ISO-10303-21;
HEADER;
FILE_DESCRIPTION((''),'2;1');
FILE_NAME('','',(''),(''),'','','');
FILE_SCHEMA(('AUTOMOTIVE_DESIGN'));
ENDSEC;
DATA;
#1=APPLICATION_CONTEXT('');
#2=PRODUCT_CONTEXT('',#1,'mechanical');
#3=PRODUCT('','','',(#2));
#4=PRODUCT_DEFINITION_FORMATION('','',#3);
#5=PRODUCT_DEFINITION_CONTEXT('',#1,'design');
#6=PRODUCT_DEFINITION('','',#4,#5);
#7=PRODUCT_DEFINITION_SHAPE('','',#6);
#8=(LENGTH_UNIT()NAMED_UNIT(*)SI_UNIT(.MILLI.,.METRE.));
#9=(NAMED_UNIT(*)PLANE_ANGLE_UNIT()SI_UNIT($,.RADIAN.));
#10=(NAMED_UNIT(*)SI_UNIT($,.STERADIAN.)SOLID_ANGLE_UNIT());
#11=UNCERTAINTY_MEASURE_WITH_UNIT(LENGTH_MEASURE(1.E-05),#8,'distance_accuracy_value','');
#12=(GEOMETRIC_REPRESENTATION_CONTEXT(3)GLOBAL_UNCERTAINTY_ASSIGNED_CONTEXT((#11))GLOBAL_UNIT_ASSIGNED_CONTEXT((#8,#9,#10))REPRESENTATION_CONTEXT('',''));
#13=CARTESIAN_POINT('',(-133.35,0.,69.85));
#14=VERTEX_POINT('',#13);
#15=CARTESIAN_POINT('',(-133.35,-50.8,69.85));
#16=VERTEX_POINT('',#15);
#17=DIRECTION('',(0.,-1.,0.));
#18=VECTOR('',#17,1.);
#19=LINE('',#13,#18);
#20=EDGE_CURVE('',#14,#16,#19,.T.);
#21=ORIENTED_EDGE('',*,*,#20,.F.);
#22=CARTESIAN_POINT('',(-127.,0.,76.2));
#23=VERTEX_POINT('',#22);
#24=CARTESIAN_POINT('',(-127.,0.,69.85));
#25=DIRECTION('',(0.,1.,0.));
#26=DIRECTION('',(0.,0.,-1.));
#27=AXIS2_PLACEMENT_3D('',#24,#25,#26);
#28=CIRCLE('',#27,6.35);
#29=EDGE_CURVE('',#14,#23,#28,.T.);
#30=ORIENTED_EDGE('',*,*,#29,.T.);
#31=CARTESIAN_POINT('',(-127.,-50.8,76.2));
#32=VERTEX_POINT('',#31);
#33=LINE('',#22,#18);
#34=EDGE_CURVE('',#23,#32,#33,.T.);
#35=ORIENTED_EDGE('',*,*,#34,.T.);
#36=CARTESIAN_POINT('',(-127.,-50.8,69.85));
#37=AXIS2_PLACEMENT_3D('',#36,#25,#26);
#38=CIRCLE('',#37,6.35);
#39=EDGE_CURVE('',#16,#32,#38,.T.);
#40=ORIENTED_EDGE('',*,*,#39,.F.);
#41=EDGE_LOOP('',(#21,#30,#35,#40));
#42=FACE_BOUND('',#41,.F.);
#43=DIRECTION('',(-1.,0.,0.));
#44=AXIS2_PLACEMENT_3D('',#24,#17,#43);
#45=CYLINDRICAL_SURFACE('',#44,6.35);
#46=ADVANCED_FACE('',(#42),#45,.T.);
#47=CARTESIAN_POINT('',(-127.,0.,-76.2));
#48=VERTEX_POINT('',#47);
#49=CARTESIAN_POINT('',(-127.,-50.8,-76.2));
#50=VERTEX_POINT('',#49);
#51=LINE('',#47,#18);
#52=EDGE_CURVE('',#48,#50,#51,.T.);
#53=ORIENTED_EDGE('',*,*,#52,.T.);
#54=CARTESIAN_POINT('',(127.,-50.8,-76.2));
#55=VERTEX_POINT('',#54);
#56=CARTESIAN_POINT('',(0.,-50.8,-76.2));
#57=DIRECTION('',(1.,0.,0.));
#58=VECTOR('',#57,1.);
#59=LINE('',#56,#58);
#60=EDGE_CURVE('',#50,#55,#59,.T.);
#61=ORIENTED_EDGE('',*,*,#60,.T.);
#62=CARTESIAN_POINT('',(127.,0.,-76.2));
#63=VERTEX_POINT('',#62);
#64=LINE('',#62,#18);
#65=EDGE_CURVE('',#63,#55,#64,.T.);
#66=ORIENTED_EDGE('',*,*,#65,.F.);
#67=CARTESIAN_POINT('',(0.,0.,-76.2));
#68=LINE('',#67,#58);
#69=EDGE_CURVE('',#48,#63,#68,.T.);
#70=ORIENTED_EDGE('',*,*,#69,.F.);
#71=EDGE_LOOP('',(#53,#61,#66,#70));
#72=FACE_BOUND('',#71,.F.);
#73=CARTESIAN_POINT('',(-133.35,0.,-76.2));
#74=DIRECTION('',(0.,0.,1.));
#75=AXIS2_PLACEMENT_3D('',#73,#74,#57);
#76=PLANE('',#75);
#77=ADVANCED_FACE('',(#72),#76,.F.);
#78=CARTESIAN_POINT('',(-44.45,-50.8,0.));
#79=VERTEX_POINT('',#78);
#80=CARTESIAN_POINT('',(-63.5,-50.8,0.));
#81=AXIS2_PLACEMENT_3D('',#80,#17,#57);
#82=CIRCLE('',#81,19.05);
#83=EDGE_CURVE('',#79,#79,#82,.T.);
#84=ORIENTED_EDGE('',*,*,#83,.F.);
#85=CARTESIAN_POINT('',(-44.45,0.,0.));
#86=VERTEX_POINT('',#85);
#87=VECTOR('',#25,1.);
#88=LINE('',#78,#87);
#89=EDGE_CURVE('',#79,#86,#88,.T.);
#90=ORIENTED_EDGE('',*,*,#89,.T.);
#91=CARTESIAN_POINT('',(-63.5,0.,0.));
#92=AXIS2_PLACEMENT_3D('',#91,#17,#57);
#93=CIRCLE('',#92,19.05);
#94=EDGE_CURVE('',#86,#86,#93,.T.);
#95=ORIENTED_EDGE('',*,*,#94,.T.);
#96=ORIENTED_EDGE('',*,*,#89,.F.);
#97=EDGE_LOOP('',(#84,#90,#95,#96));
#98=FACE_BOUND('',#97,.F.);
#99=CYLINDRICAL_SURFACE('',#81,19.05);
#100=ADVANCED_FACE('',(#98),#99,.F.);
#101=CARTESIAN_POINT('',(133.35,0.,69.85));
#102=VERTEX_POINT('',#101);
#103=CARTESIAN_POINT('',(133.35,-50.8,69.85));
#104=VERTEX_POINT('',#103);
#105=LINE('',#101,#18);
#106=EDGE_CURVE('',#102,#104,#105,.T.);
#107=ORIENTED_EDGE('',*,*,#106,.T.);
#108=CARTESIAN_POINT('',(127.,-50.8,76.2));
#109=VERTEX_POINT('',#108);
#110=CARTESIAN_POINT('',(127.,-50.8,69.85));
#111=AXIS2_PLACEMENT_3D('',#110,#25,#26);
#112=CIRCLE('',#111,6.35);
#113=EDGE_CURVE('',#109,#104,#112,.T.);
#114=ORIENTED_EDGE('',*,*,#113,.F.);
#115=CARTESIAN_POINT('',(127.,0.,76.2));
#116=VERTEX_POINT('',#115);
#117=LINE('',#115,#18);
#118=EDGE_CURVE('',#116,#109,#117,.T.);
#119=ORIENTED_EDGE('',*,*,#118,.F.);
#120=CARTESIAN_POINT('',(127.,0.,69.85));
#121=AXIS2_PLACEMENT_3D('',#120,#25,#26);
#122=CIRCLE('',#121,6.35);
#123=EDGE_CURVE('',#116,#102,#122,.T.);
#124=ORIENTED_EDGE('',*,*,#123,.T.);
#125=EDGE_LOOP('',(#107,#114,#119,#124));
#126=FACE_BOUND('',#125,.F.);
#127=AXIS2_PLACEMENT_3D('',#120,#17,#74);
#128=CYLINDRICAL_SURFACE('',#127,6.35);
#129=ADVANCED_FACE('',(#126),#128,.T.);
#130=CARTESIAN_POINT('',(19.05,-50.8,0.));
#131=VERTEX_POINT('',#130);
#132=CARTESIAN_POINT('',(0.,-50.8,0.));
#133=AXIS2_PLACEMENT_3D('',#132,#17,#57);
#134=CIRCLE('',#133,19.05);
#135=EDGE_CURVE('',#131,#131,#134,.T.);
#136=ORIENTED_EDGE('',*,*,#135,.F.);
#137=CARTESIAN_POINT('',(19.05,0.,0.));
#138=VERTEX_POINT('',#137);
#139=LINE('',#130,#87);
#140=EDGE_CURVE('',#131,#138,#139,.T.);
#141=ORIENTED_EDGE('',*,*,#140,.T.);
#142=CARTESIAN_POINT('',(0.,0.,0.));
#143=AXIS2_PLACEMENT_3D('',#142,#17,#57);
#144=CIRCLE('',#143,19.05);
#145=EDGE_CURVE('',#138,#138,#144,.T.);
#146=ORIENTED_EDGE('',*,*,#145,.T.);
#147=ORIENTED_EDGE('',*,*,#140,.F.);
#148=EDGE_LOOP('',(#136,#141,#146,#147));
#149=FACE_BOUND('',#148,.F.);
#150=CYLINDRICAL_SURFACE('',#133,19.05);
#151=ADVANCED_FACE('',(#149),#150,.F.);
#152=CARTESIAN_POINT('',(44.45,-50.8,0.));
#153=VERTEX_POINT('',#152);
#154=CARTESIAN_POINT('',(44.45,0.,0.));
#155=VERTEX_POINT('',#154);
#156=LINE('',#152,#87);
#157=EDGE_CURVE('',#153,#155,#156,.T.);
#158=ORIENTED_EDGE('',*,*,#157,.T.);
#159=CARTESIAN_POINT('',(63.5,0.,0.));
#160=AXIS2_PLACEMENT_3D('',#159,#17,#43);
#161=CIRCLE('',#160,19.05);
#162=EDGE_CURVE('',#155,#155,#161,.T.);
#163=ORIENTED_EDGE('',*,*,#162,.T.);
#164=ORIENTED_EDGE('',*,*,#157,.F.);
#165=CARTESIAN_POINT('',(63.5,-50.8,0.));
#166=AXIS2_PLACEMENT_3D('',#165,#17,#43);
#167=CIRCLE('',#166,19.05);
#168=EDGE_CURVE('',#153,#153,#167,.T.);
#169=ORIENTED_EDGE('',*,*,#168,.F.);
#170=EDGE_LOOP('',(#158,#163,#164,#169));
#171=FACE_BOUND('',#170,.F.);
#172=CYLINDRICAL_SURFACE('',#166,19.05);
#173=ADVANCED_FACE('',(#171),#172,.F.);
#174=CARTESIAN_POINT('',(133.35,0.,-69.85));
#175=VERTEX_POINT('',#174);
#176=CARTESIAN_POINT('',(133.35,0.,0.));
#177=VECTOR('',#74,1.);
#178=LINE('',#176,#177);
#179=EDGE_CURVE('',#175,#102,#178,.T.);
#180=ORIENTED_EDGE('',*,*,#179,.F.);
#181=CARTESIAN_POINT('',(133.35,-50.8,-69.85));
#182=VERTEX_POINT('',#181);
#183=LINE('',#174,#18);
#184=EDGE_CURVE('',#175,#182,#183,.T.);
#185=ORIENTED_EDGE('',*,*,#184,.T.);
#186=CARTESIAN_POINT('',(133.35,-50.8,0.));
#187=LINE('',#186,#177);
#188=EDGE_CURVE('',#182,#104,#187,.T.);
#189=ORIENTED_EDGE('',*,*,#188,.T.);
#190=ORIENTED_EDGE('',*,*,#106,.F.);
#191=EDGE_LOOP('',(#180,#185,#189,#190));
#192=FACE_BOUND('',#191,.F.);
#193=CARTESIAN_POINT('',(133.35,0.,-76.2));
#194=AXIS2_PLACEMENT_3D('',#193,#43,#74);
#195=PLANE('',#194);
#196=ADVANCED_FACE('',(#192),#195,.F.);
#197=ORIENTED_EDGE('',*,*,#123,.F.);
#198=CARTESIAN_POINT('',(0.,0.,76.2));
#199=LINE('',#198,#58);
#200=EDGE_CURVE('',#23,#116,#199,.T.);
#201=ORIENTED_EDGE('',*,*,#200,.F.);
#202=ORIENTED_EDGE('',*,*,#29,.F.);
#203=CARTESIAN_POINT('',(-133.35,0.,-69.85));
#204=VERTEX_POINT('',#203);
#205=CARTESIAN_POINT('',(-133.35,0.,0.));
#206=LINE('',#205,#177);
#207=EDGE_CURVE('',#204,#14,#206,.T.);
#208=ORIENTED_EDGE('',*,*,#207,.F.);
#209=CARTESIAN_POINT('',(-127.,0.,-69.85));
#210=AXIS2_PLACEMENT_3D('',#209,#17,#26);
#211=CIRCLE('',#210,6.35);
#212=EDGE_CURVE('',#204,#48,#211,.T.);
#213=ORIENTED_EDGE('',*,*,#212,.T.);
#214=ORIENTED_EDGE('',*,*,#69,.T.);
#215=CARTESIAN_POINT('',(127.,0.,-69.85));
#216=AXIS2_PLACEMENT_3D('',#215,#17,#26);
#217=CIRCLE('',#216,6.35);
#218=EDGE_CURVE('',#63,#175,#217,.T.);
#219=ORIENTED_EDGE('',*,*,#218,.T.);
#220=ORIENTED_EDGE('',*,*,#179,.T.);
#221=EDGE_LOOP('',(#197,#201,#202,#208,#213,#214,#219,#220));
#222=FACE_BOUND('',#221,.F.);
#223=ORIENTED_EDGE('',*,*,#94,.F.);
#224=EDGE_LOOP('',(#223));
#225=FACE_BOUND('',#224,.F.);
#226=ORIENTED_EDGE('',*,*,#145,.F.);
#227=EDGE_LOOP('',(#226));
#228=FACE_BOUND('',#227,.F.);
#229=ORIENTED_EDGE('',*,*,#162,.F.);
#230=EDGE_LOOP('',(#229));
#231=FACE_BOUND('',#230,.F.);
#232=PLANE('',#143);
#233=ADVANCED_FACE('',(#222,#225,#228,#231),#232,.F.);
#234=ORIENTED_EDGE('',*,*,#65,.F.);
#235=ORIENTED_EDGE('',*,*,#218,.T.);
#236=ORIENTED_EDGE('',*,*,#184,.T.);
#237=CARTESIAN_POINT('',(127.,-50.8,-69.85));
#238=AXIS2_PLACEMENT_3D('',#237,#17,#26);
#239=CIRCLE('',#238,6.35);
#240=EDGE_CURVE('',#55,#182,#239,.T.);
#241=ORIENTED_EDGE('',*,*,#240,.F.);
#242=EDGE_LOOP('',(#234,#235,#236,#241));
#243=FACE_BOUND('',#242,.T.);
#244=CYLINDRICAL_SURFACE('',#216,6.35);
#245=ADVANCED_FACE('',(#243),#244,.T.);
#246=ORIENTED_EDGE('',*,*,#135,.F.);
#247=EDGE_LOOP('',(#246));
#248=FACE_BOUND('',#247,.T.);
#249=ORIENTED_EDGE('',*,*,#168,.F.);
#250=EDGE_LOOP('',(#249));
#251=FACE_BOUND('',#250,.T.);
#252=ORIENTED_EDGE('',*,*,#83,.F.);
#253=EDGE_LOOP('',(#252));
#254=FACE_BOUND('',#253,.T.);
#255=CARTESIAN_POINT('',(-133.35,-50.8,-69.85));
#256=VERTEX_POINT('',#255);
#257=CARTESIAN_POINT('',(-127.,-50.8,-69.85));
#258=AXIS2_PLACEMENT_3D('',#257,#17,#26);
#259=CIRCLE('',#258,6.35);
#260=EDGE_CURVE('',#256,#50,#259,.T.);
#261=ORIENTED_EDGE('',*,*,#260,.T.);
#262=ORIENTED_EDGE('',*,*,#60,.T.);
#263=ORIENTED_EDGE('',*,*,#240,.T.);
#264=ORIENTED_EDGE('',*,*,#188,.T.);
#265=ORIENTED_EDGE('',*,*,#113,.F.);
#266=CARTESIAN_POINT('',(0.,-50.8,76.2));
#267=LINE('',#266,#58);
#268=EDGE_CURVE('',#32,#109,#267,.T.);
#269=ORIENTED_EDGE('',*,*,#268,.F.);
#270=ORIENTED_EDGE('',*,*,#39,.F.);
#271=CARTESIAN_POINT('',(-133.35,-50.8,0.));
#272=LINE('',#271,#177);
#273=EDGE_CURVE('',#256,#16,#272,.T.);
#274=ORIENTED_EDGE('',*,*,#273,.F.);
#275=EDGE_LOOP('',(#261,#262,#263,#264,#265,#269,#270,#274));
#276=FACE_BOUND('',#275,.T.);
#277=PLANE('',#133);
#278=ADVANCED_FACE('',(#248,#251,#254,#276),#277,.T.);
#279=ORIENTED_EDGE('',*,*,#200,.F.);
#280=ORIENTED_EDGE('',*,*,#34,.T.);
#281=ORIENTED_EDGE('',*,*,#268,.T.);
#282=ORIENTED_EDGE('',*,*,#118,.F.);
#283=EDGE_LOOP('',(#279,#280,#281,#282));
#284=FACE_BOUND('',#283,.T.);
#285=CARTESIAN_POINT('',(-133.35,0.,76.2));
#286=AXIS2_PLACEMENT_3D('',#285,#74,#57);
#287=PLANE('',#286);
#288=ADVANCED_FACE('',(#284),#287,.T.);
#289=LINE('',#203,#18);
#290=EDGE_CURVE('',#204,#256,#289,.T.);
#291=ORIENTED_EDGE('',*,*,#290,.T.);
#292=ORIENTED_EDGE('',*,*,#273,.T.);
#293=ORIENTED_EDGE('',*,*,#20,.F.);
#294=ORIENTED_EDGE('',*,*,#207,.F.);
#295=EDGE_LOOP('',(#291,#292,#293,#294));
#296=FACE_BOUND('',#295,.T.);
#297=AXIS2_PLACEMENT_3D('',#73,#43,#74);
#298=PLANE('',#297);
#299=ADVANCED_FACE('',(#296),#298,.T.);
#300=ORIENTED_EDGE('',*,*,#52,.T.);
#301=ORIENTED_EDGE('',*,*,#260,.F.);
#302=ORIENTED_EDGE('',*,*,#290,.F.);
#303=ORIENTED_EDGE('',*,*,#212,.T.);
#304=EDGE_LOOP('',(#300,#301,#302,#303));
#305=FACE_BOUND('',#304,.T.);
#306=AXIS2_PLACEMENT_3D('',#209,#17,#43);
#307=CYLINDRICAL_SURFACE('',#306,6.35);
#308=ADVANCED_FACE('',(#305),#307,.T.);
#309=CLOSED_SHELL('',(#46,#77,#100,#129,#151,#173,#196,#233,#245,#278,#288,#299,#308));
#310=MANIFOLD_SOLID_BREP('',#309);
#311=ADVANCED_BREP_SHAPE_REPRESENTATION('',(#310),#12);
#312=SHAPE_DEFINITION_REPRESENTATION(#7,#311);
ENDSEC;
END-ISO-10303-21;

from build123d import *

# Parameters (mm, degrees)
F0_W     = 266.7
F0_H     = 152.4
F1_DEPTH = 50.8
F2_R     = 19.05
F3_DEPTH = 76.2
F4_R     = 6.35


with BuildPart() as f1:
    # F0 (on Front) → F1 (new body)
    with BuildSketch(Plane.XZ):
        Rectangle(F0_W, F0_H)
    extrude(amount=F1_DEPTH)

    # F2 (on face) → F3 (cut)
    with BuildSketch(Plane.XZ.offset(50.8)):
        with BuildLine():
            ThreePointArc((-19.05, 0), (0, -19.05), (19.05, 0))
            ThreePointArc((19.05, 0), (0, 19.05), (-19.05, 0))
        make_face()
        with Locations((-63.5, 0)):
            Circle(F2_R)
        with BuildLine():
            ThreePointArc((82.55, 0), (63.5, 19.05), (44.45, 0))
            ThreePointArc((44.45, 0), (63.5, -19.05), (82.55, 0))
        make_face()
    extrude(amount=-F3_DEPTH, mode=Mode.SUBTRACT)

    # F4
    f4_edges = [f1.edges().sort_by_distance(p)[0] for p in [
        (133.35, -25.4, 76.2),
        (133.35, -25.4, -76.2),
        (-133.35, -25.4, 76.2),
        (-133.35, -25.4, -76.2),
    ]]
    fillet(f4_edges, radius=F4_R)


solid = f1.part
